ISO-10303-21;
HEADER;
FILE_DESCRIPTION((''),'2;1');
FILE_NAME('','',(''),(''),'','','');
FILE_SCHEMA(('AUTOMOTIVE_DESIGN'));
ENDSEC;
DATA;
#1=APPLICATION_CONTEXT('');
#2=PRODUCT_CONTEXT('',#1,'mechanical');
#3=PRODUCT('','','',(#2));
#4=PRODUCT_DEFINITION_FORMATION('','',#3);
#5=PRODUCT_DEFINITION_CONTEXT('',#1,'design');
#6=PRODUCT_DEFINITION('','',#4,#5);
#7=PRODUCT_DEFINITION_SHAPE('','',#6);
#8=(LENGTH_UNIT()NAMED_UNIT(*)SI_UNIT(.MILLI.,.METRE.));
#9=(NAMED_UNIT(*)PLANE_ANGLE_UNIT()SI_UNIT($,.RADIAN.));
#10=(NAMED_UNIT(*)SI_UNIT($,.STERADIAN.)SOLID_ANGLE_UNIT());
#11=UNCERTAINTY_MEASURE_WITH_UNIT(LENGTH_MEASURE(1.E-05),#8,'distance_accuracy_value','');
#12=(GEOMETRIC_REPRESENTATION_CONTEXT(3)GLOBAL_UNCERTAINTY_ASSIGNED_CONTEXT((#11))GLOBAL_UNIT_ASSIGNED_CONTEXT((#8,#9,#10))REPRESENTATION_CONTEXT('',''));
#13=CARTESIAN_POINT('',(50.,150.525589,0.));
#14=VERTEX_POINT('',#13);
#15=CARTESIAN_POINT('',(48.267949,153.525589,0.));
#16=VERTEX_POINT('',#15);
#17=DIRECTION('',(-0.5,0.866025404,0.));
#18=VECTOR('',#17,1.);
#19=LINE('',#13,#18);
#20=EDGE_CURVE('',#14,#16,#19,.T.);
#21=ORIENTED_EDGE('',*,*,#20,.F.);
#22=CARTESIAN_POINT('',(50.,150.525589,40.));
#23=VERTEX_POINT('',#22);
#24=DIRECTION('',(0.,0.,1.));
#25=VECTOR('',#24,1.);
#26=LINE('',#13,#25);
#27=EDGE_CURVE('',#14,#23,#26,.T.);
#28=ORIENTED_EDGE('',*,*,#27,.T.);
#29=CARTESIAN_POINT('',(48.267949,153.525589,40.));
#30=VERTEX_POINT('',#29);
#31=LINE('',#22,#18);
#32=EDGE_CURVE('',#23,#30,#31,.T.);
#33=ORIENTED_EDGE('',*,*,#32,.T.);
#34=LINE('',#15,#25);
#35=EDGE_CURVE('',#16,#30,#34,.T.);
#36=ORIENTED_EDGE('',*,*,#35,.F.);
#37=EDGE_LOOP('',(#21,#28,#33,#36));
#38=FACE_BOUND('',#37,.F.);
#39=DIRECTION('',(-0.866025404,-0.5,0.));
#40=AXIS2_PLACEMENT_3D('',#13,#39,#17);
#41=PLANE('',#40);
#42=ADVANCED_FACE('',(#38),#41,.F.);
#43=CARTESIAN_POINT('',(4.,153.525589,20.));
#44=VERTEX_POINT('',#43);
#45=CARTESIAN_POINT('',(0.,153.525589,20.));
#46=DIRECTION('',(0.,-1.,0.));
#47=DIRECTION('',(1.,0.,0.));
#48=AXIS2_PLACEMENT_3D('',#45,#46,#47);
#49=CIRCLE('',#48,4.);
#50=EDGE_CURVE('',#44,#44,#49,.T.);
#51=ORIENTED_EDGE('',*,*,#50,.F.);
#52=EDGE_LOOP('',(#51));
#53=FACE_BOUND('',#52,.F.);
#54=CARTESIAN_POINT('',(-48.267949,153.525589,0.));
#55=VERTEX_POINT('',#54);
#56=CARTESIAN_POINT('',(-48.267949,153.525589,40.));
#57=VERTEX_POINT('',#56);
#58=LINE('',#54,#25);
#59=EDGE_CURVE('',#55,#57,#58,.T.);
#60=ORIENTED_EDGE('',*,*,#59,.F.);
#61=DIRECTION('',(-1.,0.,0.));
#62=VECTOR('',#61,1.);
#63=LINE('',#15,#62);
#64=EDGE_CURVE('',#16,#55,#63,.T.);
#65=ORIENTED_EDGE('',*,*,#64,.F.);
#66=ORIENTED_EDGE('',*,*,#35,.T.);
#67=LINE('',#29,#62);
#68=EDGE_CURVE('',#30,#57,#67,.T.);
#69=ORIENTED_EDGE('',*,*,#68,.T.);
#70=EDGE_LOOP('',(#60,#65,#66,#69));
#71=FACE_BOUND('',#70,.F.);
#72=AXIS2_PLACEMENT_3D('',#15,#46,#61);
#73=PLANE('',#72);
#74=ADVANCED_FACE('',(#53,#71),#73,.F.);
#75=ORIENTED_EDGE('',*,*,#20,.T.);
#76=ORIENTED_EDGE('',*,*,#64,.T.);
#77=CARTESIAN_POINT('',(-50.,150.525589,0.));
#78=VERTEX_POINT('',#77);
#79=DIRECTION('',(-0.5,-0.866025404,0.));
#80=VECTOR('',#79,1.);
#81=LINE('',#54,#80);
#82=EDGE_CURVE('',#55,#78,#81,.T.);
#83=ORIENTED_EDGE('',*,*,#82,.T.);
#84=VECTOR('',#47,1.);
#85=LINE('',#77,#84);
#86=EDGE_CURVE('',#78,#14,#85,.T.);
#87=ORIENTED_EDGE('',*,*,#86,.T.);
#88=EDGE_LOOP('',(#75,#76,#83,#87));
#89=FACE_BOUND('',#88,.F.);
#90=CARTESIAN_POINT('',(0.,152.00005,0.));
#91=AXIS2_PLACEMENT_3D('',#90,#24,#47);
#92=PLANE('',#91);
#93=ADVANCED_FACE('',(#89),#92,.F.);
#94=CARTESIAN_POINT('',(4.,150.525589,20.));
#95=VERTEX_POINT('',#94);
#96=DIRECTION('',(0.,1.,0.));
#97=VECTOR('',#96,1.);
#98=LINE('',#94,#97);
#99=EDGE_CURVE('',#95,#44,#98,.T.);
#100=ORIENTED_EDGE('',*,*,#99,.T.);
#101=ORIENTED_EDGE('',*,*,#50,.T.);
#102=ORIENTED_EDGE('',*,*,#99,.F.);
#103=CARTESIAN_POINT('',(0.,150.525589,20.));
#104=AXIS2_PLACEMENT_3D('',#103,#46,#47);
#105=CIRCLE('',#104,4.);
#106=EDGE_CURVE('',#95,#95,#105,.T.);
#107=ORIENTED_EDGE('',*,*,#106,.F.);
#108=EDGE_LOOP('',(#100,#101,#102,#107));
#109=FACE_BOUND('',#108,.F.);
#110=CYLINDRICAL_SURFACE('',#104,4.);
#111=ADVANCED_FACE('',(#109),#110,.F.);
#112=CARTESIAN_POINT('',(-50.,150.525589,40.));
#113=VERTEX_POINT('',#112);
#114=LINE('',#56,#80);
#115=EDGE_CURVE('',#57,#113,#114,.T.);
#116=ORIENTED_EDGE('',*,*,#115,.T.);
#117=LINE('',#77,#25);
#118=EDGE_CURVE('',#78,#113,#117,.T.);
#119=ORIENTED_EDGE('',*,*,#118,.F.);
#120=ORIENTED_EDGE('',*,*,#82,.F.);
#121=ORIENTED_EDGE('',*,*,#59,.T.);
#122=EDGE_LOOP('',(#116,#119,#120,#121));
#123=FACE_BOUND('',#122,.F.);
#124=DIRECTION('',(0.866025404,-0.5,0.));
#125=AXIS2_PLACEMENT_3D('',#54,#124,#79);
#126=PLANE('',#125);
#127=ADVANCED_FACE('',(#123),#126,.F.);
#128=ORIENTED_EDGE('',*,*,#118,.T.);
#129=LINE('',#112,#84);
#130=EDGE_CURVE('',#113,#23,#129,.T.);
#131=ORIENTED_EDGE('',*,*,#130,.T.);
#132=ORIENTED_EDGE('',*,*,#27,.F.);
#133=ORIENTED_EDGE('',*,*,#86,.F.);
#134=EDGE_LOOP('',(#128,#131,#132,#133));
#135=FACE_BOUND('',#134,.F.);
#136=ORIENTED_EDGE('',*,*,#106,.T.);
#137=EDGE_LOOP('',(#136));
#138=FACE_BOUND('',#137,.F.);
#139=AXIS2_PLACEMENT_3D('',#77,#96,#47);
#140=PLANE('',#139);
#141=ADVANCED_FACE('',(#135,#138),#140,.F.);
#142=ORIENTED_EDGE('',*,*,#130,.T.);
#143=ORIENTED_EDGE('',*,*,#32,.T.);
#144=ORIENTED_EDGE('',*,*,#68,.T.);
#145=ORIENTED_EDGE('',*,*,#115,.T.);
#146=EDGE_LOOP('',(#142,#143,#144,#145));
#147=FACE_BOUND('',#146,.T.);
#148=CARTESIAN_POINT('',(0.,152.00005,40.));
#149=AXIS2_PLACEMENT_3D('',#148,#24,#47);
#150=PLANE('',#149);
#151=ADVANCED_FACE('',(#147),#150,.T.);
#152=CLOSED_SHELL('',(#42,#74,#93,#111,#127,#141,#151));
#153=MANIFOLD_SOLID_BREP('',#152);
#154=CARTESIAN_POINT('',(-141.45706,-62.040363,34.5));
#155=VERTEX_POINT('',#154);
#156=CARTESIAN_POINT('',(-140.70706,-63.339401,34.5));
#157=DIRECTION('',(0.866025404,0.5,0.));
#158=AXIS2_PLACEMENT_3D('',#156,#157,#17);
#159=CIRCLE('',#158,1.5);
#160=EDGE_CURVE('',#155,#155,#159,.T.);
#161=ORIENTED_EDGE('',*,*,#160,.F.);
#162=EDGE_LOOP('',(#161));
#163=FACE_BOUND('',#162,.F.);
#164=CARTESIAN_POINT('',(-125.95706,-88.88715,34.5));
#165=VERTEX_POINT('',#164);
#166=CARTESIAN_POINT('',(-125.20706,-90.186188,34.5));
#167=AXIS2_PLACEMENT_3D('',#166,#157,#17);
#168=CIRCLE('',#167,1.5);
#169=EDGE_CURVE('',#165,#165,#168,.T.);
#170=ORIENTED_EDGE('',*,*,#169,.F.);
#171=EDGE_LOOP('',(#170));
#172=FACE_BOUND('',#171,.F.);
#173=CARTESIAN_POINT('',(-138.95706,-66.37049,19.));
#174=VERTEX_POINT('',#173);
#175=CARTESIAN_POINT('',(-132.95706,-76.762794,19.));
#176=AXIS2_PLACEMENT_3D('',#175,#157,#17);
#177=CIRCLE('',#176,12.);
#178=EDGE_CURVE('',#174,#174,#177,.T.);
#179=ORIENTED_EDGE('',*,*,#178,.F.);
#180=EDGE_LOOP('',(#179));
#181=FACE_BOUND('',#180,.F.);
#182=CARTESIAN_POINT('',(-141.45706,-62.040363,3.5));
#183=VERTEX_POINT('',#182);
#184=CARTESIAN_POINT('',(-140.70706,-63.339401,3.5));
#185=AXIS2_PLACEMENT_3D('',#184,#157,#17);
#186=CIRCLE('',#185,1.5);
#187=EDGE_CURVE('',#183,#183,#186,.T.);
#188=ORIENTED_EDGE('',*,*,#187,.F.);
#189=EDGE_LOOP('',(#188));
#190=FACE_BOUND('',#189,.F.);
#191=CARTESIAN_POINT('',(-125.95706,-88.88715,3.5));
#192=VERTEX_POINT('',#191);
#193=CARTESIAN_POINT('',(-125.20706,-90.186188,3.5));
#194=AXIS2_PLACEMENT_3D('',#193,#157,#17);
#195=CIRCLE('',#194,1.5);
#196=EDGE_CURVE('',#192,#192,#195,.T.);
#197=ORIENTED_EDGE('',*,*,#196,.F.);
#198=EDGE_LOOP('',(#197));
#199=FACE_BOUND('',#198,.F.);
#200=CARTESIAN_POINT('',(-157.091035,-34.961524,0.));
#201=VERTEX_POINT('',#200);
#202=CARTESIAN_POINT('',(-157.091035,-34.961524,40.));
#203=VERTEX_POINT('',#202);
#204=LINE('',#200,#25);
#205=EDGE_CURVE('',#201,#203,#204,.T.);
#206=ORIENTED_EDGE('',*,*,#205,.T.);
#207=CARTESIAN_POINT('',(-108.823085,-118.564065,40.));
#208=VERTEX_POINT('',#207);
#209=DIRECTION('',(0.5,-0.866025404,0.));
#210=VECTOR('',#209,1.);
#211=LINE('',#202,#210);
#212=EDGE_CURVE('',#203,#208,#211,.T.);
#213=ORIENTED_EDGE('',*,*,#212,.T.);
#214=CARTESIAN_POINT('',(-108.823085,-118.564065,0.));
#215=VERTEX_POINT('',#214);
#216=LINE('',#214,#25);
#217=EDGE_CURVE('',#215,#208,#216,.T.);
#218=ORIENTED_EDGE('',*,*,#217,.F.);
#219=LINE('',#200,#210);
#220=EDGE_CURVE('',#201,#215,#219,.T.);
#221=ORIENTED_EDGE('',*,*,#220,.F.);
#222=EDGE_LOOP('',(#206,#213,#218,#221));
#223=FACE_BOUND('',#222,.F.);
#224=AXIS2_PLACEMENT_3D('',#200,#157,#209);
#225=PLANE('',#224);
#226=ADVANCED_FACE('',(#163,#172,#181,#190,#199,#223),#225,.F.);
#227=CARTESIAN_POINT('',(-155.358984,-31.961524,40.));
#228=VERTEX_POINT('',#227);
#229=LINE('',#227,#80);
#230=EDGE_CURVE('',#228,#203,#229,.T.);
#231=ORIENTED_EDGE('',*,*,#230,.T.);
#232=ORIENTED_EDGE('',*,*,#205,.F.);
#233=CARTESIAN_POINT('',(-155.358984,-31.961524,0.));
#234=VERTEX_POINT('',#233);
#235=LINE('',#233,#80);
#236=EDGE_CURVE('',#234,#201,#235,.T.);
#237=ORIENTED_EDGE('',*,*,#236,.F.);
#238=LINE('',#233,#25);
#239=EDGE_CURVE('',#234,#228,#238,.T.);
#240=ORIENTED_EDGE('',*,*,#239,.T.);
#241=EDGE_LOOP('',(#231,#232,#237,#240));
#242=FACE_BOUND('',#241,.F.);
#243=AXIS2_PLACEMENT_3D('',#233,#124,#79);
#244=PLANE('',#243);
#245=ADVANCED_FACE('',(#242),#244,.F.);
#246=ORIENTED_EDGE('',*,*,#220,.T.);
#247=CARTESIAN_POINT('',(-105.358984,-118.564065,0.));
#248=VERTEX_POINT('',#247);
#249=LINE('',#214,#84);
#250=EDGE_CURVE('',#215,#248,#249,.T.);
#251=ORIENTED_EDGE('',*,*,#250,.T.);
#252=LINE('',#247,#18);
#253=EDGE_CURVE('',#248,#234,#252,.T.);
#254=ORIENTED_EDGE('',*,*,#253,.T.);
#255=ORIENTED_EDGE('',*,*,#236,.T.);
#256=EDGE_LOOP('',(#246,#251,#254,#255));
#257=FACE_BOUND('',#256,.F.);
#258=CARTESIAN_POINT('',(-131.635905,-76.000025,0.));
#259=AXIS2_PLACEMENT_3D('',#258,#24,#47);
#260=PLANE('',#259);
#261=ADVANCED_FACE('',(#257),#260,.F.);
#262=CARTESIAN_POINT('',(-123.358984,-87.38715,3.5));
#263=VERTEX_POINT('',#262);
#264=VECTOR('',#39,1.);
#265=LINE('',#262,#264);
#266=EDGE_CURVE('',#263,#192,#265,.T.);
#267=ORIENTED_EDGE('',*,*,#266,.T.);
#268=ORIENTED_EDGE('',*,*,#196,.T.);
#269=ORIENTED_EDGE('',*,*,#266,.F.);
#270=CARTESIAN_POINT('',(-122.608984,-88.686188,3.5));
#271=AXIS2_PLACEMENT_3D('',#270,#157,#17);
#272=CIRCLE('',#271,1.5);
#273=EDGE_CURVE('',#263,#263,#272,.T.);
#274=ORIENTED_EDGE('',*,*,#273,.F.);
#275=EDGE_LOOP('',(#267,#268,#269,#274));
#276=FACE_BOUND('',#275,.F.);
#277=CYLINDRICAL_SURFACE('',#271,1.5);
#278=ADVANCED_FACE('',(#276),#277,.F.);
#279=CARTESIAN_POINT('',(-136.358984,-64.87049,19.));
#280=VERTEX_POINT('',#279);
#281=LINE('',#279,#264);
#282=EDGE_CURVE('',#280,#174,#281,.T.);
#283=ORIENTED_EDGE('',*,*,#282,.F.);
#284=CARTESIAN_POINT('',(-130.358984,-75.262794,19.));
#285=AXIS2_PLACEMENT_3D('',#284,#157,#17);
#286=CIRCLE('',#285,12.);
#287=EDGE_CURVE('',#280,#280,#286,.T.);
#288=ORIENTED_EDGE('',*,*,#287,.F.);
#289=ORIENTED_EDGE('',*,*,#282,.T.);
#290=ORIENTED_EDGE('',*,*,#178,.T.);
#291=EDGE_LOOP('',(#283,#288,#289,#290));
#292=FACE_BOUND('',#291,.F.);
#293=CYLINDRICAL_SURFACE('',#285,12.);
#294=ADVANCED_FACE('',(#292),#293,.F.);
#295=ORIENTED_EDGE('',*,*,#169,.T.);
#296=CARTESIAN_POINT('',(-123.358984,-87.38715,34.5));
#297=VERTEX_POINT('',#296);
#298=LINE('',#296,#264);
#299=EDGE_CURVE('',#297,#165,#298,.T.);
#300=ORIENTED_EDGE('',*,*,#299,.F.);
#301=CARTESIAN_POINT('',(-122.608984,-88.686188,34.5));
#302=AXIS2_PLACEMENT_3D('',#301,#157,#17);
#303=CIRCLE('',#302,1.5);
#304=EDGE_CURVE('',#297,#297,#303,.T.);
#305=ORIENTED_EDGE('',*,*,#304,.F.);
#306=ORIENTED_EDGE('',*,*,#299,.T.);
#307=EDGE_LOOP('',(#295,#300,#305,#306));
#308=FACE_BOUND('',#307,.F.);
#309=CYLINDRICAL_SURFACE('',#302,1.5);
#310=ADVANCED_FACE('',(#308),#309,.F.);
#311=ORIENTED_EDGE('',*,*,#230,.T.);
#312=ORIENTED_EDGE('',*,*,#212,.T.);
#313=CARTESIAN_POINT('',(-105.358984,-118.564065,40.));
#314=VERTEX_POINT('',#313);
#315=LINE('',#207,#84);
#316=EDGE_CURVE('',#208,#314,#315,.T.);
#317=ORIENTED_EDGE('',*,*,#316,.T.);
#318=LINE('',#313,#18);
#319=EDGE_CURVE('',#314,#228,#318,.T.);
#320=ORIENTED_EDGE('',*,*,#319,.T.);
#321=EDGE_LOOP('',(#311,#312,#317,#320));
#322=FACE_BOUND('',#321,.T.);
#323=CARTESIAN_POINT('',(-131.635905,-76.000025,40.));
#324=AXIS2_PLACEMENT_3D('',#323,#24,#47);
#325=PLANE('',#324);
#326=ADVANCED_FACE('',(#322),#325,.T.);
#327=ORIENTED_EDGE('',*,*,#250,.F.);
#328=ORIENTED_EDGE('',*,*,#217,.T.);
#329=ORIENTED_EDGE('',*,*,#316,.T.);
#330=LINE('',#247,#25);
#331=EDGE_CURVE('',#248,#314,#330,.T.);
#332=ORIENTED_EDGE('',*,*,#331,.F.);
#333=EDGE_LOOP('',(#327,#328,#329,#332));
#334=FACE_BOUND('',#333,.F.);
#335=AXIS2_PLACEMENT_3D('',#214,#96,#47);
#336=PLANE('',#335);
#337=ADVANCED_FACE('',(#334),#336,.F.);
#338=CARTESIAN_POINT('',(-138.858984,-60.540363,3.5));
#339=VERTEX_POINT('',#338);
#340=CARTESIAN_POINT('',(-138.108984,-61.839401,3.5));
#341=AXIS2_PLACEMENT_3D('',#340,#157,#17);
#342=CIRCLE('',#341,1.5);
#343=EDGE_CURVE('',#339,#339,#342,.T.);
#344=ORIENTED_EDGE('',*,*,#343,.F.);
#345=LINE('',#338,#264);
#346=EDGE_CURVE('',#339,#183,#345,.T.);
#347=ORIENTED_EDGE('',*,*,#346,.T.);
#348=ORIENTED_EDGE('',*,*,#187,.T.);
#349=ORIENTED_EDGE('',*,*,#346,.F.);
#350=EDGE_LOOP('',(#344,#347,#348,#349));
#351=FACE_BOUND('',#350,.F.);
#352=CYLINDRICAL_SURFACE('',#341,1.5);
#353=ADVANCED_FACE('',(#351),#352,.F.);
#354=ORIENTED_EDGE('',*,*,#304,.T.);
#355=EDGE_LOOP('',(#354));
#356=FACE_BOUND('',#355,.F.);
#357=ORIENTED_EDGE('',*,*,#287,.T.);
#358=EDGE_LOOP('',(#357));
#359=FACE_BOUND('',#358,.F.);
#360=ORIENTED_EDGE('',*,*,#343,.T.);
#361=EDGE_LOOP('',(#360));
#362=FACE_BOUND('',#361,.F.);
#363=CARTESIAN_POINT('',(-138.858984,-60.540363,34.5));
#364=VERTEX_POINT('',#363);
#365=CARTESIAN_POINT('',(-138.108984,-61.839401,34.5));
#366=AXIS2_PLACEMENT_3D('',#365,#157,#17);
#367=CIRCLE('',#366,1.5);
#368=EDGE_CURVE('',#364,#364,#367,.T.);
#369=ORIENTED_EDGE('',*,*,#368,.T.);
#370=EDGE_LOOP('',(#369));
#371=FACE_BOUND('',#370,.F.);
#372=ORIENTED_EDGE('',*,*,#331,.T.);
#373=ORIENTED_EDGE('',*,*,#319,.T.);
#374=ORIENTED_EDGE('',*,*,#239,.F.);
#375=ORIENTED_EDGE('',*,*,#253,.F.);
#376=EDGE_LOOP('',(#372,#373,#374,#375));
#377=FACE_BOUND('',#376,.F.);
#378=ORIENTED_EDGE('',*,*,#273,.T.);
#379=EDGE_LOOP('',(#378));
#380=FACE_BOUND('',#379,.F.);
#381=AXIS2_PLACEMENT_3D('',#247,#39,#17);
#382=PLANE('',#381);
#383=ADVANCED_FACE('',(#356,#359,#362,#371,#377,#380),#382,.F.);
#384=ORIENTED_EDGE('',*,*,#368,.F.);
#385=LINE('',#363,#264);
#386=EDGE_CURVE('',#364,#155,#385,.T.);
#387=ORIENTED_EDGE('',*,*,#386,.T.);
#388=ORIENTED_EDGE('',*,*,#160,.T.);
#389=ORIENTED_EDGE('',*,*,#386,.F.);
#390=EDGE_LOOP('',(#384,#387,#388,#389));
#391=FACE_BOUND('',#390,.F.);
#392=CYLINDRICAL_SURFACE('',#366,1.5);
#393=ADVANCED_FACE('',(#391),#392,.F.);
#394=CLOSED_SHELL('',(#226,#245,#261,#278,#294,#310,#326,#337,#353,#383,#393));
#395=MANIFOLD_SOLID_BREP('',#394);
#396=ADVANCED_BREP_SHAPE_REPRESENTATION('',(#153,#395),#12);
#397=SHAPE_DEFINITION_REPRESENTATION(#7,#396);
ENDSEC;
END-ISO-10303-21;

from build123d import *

# Parameters (mm, degrees)
F2_DEPTH = 40
F3_R     = 12
F3_R_2   = 1.5
F4_DEPTH = 25
F5_R     = 4
F6_DEPTH = 25


with BuildPart() as f2:
    # F1 (on face) → F2 (new body)
    with BuildSketch(Plane.XY):
        Polygon((-155.3589838486, -31.9615242271), (-157.0910346562, -34.9615242271), (-108.8230854638, -118.5640646055), (-105.3589838486, -118.5640646055), align=None)
    extrude(amount=F2_DEPTH)

    # F3 (on face) → F4 (cut)
    with BuildSketch(Plane(origin=(-130.3589838486, -75.2627944163, 0), x_dir=(-0.5, 0.8660254038, 0), z_dir=(0.8660254038, 0.5, 0))):
        with Locations((0, 19)):
            Circle(F3_R)
        with Locations((-15.5, 34.5)):
            Circle(F3_R_2)
        with Locations((15.5, 34.5)):
            Circle(F3_R_2)
        with Locations((15.5, 3.5)):
            Circle(F3_R_2)
        with Locations((-15.5, 3.5)):
            Circle(F3_R_2)
    extrude(amount=-F4_DEPTH, mode=Mode.SUBTRACT)


with BuildPart() as f2b:
    # F1 (on face) → F2, piece 2 (new body)
    with BuildSketch(Plane.XY):
        Polygon((-48.2679491924, 153.5255888326), (-50, 150.5255888326), (50, 150.5255888326), (48.2679491924, 153.5255888326), align=None)
    extrude(amount=F2_DEPTH)

    # F5 (on face) → F6 (cut)
    with BuildSketch(Plane.XZ.offset(-150.5255888326)):
        with Locations((0, 20)):
            Circle(F5_R)
    extrude(amount=-F6_DEPTH, mode=Mode.SUBTRACT)


solid = Compound([f2.part, f2b.part])
